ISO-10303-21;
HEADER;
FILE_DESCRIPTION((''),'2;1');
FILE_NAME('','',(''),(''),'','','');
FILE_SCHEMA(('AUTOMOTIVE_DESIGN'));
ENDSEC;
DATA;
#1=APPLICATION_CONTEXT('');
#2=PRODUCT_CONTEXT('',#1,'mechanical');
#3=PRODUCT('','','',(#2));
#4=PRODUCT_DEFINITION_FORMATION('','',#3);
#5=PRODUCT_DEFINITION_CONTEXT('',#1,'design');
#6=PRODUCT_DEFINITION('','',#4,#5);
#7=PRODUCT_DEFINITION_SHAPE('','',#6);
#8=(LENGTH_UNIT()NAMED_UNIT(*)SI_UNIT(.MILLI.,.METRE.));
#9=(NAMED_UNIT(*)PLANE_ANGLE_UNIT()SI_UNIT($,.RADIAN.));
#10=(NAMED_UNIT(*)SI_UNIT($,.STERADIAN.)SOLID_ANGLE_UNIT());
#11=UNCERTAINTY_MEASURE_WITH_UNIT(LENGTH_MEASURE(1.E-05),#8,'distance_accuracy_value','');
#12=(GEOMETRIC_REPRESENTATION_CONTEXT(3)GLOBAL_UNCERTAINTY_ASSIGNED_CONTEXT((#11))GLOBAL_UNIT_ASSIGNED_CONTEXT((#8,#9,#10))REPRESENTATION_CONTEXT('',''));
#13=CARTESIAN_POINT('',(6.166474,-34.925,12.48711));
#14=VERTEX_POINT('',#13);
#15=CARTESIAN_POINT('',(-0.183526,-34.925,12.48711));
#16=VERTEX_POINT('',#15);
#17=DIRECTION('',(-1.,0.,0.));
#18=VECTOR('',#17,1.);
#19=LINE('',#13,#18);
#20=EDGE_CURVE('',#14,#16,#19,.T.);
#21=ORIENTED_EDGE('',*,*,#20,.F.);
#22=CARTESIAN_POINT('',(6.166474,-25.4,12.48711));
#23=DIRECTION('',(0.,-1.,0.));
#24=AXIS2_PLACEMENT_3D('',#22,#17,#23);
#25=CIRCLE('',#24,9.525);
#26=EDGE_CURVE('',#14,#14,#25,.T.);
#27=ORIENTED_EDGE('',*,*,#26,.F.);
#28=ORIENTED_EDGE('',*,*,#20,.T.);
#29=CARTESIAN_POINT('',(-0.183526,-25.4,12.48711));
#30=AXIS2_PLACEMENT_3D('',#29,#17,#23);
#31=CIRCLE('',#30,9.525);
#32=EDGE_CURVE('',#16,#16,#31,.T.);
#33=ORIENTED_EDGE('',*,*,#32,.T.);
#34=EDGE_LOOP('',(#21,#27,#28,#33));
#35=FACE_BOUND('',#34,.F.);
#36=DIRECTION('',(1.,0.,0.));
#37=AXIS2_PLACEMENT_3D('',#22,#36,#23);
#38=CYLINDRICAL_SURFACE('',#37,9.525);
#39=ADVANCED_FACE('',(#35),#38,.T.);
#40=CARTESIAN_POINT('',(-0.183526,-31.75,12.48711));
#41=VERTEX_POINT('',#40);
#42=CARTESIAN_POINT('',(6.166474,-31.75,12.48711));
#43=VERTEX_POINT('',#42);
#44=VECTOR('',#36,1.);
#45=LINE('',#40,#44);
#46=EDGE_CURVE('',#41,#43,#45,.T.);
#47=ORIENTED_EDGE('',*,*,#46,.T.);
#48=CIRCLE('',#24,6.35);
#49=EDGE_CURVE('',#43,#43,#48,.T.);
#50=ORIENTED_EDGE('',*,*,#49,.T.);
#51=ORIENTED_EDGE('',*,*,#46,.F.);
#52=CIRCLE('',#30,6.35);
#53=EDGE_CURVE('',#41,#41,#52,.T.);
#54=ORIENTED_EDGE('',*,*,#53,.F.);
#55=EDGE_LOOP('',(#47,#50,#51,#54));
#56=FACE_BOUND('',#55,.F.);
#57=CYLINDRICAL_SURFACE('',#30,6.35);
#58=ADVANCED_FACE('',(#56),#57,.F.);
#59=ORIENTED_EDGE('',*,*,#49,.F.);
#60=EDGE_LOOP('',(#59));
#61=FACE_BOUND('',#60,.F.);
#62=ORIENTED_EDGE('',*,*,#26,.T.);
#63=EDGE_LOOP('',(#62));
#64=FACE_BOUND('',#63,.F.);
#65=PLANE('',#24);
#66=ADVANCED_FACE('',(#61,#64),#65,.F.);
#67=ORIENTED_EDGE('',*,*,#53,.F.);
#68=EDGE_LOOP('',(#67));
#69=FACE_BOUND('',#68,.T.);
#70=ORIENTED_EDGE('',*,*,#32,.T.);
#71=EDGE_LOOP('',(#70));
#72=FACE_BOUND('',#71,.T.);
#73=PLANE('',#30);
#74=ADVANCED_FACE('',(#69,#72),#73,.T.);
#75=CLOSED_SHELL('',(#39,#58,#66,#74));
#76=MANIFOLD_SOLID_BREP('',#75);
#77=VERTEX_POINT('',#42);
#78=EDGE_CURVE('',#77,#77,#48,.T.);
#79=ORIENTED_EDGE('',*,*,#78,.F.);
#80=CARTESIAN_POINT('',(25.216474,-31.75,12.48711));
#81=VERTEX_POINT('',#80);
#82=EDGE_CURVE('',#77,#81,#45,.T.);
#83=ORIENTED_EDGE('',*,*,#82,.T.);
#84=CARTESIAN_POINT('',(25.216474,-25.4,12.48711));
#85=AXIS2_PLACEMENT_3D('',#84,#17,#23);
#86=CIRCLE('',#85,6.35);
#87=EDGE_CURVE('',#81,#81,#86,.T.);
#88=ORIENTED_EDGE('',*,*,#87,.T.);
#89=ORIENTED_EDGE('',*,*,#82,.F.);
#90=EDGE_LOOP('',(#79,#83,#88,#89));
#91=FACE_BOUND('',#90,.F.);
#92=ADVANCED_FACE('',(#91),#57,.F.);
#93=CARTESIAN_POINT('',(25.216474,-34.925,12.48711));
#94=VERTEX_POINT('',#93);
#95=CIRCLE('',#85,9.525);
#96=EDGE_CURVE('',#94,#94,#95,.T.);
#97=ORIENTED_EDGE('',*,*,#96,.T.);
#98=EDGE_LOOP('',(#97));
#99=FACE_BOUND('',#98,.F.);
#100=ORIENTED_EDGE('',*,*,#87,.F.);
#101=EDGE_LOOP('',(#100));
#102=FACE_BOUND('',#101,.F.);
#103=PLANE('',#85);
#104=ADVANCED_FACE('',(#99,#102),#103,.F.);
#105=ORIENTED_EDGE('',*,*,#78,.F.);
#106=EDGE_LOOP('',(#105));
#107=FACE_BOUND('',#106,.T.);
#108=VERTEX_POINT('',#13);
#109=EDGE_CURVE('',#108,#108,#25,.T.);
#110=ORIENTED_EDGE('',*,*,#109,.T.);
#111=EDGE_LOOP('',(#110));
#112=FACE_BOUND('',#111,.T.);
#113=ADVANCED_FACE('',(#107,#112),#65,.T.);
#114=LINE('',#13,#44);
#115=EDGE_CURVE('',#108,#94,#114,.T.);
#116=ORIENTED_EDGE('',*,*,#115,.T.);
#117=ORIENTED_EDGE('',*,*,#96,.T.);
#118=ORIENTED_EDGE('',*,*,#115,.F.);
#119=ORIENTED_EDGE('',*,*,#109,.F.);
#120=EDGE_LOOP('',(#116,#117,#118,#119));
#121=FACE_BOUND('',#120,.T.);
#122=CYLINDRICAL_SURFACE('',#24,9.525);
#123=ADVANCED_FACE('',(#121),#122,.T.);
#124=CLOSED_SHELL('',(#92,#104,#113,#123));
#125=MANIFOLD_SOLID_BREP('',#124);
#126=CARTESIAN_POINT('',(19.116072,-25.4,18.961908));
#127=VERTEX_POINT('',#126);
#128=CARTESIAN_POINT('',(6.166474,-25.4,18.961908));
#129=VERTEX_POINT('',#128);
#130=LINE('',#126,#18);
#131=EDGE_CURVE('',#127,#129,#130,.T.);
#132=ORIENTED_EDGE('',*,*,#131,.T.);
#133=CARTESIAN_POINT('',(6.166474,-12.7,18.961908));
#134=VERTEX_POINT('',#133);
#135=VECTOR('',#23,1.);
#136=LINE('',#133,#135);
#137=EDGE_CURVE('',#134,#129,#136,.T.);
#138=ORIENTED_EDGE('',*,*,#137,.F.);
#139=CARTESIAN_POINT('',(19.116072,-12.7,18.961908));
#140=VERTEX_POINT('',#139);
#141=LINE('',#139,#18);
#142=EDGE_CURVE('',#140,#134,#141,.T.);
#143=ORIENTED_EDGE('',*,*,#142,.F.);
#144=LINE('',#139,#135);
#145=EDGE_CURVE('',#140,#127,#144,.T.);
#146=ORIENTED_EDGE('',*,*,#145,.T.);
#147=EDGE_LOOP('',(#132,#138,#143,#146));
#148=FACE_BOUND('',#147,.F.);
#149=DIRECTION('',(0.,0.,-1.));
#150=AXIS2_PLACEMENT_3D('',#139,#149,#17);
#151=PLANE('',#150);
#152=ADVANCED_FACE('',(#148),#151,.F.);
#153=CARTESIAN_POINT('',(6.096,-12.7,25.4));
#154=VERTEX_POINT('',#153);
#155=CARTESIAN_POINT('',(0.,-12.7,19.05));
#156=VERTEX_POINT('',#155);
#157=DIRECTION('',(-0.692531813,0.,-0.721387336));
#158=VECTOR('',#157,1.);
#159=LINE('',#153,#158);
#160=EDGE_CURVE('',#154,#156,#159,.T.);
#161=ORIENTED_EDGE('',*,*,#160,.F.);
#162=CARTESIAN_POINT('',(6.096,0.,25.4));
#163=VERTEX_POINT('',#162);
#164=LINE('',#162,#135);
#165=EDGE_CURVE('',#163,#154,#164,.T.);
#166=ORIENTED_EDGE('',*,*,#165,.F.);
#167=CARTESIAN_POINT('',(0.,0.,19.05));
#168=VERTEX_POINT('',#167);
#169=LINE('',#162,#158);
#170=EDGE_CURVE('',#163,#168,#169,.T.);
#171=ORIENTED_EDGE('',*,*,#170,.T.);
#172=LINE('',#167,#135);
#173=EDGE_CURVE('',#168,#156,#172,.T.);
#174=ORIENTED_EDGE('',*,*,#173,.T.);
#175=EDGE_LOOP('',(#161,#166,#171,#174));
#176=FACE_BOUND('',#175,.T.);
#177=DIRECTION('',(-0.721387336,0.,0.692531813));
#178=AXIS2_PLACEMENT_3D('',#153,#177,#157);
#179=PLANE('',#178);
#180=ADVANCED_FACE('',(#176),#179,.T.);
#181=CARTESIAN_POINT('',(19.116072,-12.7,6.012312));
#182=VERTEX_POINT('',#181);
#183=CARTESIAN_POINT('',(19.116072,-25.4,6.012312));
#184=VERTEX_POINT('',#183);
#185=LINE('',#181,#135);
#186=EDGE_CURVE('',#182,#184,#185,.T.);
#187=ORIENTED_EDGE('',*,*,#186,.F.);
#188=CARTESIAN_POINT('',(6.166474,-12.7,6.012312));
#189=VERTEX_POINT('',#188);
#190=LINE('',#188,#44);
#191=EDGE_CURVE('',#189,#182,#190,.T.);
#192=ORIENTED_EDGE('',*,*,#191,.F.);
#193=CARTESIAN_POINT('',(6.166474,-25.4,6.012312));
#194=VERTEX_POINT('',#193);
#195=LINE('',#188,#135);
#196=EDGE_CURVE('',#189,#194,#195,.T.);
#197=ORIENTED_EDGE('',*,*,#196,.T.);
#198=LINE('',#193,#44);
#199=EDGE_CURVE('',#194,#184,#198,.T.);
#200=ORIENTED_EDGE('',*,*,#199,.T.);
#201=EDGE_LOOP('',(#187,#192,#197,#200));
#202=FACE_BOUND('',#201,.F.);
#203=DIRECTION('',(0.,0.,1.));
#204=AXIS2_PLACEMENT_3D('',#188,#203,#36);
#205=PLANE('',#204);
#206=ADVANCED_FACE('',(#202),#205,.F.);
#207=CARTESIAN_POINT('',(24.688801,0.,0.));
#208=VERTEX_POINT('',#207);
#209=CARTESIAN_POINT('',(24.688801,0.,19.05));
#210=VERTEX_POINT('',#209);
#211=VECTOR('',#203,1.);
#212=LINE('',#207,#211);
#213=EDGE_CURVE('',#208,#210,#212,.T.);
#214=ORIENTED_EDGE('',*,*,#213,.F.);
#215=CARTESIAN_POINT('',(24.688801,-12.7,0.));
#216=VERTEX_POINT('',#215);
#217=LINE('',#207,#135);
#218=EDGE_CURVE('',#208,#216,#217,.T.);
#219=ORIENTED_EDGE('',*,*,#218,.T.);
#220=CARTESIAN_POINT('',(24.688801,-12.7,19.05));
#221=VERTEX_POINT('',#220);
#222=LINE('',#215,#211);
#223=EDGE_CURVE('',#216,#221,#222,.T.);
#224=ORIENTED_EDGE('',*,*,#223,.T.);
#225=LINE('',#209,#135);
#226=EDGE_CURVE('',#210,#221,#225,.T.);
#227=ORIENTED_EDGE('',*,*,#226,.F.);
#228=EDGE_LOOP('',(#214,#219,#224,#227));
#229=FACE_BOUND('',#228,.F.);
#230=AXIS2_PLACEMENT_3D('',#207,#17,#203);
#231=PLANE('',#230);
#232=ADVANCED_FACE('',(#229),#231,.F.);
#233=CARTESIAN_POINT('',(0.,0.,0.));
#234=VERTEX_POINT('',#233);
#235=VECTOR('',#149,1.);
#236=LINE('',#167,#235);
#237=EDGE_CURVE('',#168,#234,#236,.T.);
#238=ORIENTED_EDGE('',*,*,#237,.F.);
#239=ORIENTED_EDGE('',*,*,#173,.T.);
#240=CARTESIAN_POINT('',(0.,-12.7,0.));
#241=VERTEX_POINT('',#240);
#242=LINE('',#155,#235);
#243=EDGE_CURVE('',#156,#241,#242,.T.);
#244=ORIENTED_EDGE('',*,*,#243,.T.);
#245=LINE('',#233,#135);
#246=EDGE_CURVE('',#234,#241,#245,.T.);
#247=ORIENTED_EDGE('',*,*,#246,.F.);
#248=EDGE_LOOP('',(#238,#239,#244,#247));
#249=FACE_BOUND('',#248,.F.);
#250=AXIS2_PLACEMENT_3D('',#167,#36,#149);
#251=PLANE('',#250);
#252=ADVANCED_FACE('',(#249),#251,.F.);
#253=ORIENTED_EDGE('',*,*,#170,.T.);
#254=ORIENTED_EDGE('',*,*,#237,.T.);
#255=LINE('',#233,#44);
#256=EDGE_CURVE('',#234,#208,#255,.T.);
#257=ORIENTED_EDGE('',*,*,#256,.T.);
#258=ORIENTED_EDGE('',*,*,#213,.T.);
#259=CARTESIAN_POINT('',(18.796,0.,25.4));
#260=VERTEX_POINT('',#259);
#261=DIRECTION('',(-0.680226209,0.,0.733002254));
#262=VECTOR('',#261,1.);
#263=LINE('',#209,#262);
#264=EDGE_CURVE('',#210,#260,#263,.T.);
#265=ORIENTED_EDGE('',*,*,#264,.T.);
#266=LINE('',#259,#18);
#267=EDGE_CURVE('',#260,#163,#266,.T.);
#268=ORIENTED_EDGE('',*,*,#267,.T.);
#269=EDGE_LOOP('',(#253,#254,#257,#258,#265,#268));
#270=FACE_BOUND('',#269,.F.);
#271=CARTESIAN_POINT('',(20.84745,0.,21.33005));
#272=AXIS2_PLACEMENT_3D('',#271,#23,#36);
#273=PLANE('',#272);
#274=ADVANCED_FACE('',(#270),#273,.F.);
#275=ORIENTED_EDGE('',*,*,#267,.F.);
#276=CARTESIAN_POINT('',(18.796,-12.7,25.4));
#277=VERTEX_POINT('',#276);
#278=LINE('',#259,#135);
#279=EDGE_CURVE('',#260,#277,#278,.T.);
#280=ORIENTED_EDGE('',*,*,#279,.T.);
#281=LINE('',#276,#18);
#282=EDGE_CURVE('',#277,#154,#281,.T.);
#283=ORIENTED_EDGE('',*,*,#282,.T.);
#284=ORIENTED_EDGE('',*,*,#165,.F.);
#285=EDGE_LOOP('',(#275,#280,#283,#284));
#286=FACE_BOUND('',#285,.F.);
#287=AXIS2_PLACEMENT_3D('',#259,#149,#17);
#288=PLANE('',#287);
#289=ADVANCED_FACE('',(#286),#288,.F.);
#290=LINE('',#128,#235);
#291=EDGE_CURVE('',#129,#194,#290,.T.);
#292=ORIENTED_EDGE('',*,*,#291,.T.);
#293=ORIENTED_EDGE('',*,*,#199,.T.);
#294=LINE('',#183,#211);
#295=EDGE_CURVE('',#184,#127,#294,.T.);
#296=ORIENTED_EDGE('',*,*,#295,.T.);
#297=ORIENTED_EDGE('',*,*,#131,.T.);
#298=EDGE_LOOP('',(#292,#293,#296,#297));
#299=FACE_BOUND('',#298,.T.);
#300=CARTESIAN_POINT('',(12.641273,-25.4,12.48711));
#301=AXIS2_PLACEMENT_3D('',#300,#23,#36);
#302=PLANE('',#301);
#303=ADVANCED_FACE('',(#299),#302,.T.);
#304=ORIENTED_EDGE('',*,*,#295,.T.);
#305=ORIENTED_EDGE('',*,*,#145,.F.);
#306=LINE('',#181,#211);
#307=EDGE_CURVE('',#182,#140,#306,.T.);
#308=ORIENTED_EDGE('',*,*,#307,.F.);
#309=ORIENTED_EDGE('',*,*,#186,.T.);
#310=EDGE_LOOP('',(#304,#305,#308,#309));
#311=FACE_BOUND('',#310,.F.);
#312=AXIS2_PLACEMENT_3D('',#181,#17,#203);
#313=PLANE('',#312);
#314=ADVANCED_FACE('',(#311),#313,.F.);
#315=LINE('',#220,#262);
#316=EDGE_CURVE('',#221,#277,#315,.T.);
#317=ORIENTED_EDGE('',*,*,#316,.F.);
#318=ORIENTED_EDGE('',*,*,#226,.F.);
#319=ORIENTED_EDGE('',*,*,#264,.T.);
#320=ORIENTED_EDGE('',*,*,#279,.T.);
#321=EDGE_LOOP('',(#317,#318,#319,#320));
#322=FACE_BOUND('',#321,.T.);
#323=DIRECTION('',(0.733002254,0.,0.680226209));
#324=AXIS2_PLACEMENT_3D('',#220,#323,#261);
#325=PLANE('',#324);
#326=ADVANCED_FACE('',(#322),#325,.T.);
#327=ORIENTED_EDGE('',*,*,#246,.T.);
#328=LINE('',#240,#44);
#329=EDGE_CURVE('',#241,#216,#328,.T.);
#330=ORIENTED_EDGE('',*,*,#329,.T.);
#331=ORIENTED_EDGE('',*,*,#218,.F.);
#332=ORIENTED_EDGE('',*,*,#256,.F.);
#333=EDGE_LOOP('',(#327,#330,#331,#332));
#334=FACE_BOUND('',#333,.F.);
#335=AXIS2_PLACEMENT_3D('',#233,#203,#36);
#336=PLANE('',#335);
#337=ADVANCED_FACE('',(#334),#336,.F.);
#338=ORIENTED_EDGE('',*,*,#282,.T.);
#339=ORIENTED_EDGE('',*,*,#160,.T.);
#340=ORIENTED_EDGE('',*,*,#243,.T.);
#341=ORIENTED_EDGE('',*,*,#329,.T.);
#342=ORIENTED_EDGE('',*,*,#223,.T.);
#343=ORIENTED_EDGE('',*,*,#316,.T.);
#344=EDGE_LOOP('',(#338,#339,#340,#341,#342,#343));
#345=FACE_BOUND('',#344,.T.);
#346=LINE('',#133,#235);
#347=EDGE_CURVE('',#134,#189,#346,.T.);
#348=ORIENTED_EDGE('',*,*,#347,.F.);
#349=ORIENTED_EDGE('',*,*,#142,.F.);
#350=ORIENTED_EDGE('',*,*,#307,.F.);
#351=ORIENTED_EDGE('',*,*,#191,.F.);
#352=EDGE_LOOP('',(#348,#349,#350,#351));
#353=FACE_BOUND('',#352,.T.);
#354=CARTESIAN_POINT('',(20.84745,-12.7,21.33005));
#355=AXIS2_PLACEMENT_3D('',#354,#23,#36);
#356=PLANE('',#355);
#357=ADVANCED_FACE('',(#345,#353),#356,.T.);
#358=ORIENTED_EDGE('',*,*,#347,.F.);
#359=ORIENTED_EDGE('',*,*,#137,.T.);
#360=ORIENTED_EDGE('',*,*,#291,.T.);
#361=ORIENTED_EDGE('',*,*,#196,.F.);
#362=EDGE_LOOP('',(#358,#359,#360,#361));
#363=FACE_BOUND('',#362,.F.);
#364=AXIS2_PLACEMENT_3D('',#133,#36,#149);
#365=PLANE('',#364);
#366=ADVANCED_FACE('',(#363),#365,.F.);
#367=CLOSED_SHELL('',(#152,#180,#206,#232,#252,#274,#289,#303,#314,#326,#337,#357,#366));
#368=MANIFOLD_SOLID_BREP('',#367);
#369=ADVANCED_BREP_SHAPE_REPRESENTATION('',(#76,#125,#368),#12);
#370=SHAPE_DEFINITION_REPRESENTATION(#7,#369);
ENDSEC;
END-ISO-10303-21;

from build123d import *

# Parameters (mm, degrees)
F1_DEPTH  = 12.7
F3_DEPTH  = 12.7
F5_DEPTH  = 12.7
F7_DEPTH  = 12.7
F8_R      = 9.525
F9_DEPTH  = 19.05
F10_DEPTH = 6.35
F11_R     = 6.35
F12_DEPTH = 25.4


# Not quite as in the source:
# - a feature of the source that left no trace in its solid (it failed there, or was rolled back) is left out


with BuildPart() as f1:
    # F0 (on Front) → F1 (new body)
    with BuildSketch(Plane.XZ):
        Polygon((0, 19.05), (0, 0), (24.6888007513, 0), (24.6888007513, 19.05), (18.7959997422, 19.05), (18.7959997422, 25.4), (6.0959997422, 25.4), (6.0959997422, 19.05), align=None)
    extrude(amount=F1_DEPTH)

    # F2 (on face) → F3 (join)
    with BuildSketch(Plane.XZ.offset(12.7)):
        Polygon((6.0959997422, 25.4), (0, 19.05), (6.0959997422, 19.05), align=None)
    extrude(amount=-F3_DEPTH)

    # F4 (on face) → F5 (join)
    with BuildSketch(Plane.XZ.offset(12.7)):
        Polygon((24.6888007513, 19.05), (18.7959997422, 25.4), (18.7959997422, 19.05), align=None)
    extrude(amount=-F5_DEPTH)

    # F6 (on face) → F7 (join)
    with BuildSketch(Plane.XZ.offset(12.7)):
        Polygon((19.1160719842, 18.9619082958), (12.6412734389, 18.9619082958), (6.1664739624, 18.9619082958), (6.1664739624, 6.0123121366), (19.1160719842, 6.0123121366), align=None)
    extrude(amount=F7_DEPTH)


with BuildPart() as f9:
    # F8 (on face) → F9 (new body)
    with BuildSketch(Plane(origin=(6.1664739624, 0, 0), x_dir=(0, -1, 0), z_dir=(-1, 0, 0))):
        with Locations((25.4, 12.4871102162)):
            Circle(F8_R)
    extrude(amount=-F9_DEPTH)


with BuildPart() as f10:
    # F10 (new): a face of the model
    f10_faces = [f9.part.faces().sort_by_distance(p)[0] for p in [
        (6.1664739624, -25.4, 12.4871102162),
    ]]
    extrude(f10_faces, amount=F10_DEPTH)


with BuildPart() as f12_tool:
    # F11 (on face) → F12 (new body)
    with BuildSketch(Plane(origin=(-0.1835260376, 0, 0), x_dir=(0, -1, 0), z_dir=(-1, 0, 0))):
        with Locations((25.4, 12.4871102162)):
            Circle(F11_R)
    extrude(amount=-F12_DEPTH)


with BuildPart() as f9_1:
    add(f9.part)

    # F12: cut by f12_tool
    add(f12_tool.part, mode=Mode.SUBTRACT)


with BuildPart() as f10_1:
    add(f10.part)

    # F12: cut by f12_tool
    add(f12_tool.part, mode=Mode.SUBTRACT)


solid = Compound([f1.part, f9_1.part, f10_1.part])
